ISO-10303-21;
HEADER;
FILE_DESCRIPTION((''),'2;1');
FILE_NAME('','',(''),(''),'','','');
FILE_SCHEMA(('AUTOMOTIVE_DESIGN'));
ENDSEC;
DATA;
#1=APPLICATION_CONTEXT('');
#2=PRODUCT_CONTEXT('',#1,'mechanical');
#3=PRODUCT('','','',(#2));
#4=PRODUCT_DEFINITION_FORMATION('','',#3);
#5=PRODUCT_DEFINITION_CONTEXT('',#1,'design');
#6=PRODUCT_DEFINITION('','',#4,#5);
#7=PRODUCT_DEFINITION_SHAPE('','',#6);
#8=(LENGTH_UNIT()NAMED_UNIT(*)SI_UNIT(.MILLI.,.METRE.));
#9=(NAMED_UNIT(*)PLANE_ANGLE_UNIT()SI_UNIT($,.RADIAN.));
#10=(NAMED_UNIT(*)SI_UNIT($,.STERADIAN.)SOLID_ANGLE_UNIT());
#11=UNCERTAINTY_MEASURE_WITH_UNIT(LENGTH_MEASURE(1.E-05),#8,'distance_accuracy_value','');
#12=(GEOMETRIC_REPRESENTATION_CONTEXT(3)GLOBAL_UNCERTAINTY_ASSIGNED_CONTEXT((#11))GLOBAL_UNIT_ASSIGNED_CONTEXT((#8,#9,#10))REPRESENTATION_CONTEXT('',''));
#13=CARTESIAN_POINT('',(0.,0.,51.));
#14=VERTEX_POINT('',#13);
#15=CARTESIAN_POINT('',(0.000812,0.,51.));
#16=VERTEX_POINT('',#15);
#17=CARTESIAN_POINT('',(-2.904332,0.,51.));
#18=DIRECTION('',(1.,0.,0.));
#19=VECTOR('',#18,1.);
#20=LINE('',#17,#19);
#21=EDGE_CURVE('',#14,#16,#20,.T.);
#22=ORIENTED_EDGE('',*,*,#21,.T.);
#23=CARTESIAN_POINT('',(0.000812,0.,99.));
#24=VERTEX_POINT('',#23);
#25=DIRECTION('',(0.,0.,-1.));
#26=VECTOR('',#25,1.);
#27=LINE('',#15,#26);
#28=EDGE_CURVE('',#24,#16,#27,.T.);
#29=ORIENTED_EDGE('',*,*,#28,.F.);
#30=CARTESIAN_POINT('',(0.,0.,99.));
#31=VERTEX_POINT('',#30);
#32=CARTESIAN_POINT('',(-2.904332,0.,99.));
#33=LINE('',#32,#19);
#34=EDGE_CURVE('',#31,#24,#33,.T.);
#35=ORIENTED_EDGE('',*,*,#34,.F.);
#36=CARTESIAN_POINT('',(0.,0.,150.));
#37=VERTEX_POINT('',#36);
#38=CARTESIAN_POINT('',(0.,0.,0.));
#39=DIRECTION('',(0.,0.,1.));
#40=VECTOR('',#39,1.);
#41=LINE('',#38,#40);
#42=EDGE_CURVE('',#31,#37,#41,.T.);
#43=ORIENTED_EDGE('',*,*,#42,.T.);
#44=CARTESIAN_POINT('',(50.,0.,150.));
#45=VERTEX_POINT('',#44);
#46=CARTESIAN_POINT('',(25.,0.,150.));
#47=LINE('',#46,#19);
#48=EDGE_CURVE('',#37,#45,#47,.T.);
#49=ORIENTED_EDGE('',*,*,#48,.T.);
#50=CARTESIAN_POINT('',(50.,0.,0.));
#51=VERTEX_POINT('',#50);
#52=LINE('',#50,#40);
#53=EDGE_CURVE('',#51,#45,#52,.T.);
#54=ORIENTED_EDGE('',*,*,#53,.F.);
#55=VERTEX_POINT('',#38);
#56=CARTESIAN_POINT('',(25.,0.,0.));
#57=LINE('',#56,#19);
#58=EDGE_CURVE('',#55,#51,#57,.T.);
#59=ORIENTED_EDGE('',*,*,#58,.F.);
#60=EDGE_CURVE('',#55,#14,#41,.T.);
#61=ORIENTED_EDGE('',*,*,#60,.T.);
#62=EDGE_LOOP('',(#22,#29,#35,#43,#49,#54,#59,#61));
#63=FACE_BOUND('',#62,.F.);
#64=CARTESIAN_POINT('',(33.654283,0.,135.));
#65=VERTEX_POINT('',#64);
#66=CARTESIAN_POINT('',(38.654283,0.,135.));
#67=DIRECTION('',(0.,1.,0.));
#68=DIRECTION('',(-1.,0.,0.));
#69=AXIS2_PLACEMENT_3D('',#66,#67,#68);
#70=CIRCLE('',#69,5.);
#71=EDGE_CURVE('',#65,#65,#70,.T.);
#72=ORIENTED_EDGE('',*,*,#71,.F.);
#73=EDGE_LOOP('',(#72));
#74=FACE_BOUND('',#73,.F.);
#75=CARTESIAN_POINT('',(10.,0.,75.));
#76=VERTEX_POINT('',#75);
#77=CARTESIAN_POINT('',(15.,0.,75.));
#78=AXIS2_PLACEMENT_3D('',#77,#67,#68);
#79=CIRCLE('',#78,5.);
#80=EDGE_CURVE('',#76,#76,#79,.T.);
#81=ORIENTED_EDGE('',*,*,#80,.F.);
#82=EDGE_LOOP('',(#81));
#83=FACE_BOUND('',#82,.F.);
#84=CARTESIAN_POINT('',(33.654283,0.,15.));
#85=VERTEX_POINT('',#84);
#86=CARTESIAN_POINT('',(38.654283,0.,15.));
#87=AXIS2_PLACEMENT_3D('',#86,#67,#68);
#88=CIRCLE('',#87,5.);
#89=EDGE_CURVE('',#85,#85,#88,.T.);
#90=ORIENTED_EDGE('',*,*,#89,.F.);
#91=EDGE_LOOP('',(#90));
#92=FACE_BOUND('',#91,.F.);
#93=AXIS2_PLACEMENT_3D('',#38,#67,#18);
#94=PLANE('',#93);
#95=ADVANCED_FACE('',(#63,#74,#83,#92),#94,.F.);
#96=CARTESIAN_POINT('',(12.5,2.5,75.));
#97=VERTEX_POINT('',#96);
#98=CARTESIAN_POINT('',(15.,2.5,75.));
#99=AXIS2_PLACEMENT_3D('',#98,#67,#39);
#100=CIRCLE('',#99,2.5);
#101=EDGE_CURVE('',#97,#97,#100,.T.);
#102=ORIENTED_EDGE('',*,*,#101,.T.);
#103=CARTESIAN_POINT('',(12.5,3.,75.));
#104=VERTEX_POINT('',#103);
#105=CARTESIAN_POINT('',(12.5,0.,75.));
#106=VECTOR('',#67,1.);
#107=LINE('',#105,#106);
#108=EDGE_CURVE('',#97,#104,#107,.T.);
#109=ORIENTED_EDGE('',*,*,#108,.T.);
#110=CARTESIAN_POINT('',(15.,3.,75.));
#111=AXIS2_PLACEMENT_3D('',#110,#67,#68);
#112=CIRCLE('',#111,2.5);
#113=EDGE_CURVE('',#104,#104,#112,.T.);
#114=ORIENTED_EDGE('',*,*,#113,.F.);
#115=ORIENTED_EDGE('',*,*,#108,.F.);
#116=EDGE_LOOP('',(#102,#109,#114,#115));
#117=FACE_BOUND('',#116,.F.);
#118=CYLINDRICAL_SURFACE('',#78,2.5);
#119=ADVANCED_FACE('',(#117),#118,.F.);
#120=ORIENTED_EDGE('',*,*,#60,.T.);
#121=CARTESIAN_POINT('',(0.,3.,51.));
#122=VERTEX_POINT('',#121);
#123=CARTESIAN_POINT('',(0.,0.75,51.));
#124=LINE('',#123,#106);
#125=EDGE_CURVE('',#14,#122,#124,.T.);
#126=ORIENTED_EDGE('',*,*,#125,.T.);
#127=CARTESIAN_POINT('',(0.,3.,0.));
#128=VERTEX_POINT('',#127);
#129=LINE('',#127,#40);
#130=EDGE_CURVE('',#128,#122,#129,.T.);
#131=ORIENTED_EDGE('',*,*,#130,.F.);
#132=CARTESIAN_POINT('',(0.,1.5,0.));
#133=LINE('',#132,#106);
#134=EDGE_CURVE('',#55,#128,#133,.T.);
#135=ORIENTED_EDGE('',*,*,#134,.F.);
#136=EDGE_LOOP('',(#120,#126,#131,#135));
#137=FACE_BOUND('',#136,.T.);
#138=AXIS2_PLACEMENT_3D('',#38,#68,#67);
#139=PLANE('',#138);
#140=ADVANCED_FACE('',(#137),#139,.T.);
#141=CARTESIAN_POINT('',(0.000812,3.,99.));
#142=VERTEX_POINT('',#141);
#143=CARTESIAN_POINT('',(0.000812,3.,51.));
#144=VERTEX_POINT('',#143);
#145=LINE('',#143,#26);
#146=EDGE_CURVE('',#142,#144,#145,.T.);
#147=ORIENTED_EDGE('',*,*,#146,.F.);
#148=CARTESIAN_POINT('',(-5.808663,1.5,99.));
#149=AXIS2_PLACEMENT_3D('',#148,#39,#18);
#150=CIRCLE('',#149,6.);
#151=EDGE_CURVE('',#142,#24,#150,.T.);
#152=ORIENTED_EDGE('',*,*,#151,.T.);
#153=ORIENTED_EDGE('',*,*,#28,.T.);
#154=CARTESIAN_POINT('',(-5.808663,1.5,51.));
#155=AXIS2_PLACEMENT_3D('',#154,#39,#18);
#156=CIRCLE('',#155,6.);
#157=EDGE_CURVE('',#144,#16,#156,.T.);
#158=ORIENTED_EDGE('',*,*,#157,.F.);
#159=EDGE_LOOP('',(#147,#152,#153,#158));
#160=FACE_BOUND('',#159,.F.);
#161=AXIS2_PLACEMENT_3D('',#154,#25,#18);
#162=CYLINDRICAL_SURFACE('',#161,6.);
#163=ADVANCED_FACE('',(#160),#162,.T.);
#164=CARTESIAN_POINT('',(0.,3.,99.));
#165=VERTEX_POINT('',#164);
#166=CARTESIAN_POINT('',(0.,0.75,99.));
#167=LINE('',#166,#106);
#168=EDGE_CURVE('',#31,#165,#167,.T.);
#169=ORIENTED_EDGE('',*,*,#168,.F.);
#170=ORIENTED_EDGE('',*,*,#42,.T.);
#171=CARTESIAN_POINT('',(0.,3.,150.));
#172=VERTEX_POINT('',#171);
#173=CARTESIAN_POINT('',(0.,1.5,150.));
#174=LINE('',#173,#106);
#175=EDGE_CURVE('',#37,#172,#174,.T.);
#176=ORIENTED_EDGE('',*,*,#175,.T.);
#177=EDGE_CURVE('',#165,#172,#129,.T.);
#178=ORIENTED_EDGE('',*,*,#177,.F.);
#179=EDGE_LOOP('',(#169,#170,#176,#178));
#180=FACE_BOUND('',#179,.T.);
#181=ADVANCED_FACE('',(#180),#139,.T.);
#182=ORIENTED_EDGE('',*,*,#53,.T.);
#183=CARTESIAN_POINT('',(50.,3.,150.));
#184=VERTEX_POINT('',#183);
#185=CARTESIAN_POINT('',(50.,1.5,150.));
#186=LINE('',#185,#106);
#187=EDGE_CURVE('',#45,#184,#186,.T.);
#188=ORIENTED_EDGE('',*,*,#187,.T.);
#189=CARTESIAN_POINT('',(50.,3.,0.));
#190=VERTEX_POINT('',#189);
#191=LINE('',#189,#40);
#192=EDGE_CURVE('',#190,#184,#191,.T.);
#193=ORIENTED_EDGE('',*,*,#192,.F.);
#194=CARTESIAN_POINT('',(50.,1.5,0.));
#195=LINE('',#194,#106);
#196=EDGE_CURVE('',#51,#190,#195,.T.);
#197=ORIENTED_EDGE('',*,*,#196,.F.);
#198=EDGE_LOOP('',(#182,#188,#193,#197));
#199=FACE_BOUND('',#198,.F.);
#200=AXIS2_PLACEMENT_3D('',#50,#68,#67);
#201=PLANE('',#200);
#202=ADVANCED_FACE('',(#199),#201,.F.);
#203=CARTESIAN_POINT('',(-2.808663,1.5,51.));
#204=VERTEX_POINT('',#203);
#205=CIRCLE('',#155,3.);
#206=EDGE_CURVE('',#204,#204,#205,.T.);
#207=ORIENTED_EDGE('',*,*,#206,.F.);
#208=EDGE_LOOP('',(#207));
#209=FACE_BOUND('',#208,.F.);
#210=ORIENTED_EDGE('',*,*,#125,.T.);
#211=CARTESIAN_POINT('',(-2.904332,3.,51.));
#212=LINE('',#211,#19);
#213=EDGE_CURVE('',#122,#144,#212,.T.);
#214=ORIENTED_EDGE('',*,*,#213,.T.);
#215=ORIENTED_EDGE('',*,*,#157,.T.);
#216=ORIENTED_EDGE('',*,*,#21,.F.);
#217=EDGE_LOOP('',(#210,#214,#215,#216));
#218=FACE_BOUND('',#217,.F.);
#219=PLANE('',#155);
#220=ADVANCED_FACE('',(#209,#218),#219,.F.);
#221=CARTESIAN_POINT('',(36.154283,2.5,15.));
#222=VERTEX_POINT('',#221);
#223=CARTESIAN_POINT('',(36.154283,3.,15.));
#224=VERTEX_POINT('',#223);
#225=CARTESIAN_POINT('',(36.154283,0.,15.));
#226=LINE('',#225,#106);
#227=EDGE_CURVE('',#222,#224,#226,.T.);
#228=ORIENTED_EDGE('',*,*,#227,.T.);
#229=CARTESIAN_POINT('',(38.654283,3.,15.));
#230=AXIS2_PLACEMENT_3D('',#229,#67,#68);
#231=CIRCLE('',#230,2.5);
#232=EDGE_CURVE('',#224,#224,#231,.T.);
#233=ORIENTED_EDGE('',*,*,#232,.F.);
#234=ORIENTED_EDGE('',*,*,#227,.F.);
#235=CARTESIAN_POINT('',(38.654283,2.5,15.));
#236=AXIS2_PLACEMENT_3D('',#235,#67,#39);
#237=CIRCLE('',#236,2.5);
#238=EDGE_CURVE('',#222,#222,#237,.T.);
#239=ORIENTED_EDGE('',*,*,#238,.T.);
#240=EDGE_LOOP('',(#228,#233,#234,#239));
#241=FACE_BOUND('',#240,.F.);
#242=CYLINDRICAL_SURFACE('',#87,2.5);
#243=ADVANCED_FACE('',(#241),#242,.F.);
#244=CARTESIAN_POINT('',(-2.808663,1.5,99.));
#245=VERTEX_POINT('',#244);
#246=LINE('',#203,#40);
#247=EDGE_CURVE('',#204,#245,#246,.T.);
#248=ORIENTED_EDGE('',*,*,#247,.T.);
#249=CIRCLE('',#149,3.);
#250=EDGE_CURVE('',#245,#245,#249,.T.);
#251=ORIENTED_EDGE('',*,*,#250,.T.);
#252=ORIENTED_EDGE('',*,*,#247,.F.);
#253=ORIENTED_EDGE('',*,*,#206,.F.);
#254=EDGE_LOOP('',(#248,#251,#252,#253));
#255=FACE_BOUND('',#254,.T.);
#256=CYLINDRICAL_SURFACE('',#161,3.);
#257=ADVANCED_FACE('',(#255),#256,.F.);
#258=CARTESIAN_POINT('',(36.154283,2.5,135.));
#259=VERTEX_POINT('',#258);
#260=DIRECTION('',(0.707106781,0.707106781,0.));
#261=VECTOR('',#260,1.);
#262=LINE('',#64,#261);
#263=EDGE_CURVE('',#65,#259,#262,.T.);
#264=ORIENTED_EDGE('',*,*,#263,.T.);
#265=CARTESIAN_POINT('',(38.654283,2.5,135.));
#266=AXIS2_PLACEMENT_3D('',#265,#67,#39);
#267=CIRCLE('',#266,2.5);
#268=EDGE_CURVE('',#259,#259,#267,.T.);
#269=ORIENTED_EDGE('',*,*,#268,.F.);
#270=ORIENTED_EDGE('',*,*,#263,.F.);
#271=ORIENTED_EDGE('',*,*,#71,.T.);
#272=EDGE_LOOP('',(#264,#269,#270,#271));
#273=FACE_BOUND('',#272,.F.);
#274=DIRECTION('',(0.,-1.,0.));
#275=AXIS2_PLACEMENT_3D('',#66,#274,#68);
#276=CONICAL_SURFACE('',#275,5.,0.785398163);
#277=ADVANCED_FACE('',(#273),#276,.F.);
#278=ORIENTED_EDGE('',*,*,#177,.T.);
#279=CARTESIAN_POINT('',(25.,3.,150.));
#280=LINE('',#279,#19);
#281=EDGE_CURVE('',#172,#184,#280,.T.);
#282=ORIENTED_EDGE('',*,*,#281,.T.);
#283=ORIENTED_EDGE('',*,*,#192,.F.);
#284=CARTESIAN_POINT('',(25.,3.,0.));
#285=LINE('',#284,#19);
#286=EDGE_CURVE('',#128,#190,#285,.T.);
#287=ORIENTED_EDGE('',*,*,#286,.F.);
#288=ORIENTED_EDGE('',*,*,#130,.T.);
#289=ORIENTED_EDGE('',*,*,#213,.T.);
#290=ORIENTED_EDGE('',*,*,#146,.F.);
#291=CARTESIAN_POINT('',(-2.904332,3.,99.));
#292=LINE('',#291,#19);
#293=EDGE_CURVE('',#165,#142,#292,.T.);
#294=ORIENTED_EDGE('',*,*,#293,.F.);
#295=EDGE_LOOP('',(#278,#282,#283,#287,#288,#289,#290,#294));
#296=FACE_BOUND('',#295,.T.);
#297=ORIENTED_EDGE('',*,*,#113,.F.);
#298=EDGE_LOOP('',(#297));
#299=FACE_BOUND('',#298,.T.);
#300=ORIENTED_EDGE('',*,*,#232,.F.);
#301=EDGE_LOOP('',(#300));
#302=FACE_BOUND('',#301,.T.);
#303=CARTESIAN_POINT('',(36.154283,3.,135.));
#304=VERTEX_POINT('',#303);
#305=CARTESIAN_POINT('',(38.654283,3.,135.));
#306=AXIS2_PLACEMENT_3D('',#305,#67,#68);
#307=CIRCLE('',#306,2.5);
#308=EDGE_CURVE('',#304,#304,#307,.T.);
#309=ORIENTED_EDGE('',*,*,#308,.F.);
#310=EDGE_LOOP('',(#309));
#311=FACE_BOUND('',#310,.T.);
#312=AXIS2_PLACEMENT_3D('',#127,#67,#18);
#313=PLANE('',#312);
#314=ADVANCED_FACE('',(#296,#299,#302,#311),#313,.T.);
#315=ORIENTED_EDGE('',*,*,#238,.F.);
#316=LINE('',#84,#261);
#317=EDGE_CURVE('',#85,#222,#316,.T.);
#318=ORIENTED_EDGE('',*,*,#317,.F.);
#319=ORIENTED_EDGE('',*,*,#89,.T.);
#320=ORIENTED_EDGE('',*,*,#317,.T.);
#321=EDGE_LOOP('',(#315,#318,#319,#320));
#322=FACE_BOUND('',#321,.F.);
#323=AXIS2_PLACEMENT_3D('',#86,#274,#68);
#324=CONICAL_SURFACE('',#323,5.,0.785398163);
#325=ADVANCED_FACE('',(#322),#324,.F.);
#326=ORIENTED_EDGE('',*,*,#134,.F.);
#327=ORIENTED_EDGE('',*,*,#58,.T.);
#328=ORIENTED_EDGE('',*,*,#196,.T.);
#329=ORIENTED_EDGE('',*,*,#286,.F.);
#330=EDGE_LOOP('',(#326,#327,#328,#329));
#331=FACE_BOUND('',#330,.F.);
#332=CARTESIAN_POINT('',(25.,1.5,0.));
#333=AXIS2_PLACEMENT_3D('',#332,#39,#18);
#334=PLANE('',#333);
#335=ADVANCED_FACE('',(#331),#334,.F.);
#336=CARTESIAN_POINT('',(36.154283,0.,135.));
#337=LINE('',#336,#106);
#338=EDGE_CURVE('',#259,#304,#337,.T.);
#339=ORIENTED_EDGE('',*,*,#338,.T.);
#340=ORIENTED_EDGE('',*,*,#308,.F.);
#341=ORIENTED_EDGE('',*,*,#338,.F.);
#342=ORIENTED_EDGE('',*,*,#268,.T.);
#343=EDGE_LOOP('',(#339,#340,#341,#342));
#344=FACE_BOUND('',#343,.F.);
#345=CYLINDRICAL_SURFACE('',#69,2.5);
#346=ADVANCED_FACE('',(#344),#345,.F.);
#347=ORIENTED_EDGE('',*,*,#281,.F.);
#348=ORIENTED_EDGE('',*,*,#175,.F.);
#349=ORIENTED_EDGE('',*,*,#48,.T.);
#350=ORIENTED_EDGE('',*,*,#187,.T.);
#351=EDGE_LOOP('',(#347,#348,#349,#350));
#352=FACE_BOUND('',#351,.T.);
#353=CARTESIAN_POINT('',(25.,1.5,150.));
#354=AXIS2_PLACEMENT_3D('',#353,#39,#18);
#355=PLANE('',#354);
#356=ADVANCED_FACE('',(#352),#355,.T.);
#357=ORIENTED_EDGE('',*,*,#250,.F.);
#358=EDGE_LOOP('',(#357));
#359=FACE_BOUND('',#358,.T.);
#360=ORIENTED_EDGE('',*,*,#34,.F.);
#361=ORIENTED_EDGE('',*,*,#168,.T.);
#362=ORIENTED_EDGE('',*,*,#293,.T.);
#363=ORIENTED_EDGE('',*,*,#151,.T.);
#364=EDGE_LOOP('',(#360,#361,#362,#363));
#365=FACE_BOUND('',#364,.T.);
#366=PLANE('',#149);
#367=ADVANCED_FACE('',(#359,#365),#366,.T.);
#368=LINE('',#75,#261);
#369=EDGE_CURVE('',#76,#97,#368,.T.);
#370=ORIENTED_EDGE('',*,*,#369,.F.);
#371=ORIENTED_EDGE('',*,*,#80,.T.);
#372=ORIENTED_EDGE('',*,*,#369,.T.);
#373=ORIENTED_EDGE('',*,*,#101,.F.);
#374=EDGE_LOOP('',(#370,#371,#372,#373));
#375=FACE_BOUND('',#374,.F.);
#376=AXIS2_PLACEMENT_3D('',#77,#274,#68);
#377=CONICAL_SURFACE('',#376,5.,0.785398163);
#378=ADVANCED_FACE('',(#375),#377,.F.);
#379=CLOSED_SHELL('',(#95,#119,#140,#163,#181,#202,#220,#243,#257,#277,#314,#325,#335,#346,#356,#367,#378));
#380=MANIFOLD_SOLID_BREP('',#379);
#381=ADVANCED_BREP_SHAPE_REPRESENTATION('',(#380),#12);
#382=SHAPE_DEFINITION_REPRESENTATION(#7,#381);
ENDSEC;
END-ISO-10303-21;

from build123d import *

# Parameters (mm, degrees)
F0_W           = 50
F0_H           = 3
F1_DEPTH       = 150
F3_START       = 51
F2_R           = 6
F2_R_2         = 3
F3_DEPTH       = 48
F5_D           = 5
F5_CSINK_D     = 10
F5_CSINK_ANGLE = 90


# Not quite as in the source:
# - a feature names something its author has since deleted; it is built from what else it names


with BuildPart() as f1:
    # F0 (on Top) → F1 (new body)
    with BuildSketch(Plane.XY):
        with Locations((25, 1.5)):
            Rectangle(F0_W, F0_H)
    extrude(amount=F1_DEPTH)

    # F2 (on Top) → F3 (join)
    with BuildSketch(Plane.XY.offset(F3_START)):
        with Locations((-5.8086630434, 1.5)):
            Circle(F2_R)
        with Locations((-5.8086630434, 1.5)):
            Circle(F2_R_2, mode=Mode.SUBTRACT)
    extrude(amount=F3_DEPTH)

    # F5 (through all)
    with Locations(Plane.XZ):
        with Locations((38.6542826891, 135), (15, 75), (38.6542826891, 15)):
            CounterSinkHole(F5_D / 2, F5_CSINK_D / 2, counter_sink_angle=F5_CSINK_ANGLE)


solid = f1.part
